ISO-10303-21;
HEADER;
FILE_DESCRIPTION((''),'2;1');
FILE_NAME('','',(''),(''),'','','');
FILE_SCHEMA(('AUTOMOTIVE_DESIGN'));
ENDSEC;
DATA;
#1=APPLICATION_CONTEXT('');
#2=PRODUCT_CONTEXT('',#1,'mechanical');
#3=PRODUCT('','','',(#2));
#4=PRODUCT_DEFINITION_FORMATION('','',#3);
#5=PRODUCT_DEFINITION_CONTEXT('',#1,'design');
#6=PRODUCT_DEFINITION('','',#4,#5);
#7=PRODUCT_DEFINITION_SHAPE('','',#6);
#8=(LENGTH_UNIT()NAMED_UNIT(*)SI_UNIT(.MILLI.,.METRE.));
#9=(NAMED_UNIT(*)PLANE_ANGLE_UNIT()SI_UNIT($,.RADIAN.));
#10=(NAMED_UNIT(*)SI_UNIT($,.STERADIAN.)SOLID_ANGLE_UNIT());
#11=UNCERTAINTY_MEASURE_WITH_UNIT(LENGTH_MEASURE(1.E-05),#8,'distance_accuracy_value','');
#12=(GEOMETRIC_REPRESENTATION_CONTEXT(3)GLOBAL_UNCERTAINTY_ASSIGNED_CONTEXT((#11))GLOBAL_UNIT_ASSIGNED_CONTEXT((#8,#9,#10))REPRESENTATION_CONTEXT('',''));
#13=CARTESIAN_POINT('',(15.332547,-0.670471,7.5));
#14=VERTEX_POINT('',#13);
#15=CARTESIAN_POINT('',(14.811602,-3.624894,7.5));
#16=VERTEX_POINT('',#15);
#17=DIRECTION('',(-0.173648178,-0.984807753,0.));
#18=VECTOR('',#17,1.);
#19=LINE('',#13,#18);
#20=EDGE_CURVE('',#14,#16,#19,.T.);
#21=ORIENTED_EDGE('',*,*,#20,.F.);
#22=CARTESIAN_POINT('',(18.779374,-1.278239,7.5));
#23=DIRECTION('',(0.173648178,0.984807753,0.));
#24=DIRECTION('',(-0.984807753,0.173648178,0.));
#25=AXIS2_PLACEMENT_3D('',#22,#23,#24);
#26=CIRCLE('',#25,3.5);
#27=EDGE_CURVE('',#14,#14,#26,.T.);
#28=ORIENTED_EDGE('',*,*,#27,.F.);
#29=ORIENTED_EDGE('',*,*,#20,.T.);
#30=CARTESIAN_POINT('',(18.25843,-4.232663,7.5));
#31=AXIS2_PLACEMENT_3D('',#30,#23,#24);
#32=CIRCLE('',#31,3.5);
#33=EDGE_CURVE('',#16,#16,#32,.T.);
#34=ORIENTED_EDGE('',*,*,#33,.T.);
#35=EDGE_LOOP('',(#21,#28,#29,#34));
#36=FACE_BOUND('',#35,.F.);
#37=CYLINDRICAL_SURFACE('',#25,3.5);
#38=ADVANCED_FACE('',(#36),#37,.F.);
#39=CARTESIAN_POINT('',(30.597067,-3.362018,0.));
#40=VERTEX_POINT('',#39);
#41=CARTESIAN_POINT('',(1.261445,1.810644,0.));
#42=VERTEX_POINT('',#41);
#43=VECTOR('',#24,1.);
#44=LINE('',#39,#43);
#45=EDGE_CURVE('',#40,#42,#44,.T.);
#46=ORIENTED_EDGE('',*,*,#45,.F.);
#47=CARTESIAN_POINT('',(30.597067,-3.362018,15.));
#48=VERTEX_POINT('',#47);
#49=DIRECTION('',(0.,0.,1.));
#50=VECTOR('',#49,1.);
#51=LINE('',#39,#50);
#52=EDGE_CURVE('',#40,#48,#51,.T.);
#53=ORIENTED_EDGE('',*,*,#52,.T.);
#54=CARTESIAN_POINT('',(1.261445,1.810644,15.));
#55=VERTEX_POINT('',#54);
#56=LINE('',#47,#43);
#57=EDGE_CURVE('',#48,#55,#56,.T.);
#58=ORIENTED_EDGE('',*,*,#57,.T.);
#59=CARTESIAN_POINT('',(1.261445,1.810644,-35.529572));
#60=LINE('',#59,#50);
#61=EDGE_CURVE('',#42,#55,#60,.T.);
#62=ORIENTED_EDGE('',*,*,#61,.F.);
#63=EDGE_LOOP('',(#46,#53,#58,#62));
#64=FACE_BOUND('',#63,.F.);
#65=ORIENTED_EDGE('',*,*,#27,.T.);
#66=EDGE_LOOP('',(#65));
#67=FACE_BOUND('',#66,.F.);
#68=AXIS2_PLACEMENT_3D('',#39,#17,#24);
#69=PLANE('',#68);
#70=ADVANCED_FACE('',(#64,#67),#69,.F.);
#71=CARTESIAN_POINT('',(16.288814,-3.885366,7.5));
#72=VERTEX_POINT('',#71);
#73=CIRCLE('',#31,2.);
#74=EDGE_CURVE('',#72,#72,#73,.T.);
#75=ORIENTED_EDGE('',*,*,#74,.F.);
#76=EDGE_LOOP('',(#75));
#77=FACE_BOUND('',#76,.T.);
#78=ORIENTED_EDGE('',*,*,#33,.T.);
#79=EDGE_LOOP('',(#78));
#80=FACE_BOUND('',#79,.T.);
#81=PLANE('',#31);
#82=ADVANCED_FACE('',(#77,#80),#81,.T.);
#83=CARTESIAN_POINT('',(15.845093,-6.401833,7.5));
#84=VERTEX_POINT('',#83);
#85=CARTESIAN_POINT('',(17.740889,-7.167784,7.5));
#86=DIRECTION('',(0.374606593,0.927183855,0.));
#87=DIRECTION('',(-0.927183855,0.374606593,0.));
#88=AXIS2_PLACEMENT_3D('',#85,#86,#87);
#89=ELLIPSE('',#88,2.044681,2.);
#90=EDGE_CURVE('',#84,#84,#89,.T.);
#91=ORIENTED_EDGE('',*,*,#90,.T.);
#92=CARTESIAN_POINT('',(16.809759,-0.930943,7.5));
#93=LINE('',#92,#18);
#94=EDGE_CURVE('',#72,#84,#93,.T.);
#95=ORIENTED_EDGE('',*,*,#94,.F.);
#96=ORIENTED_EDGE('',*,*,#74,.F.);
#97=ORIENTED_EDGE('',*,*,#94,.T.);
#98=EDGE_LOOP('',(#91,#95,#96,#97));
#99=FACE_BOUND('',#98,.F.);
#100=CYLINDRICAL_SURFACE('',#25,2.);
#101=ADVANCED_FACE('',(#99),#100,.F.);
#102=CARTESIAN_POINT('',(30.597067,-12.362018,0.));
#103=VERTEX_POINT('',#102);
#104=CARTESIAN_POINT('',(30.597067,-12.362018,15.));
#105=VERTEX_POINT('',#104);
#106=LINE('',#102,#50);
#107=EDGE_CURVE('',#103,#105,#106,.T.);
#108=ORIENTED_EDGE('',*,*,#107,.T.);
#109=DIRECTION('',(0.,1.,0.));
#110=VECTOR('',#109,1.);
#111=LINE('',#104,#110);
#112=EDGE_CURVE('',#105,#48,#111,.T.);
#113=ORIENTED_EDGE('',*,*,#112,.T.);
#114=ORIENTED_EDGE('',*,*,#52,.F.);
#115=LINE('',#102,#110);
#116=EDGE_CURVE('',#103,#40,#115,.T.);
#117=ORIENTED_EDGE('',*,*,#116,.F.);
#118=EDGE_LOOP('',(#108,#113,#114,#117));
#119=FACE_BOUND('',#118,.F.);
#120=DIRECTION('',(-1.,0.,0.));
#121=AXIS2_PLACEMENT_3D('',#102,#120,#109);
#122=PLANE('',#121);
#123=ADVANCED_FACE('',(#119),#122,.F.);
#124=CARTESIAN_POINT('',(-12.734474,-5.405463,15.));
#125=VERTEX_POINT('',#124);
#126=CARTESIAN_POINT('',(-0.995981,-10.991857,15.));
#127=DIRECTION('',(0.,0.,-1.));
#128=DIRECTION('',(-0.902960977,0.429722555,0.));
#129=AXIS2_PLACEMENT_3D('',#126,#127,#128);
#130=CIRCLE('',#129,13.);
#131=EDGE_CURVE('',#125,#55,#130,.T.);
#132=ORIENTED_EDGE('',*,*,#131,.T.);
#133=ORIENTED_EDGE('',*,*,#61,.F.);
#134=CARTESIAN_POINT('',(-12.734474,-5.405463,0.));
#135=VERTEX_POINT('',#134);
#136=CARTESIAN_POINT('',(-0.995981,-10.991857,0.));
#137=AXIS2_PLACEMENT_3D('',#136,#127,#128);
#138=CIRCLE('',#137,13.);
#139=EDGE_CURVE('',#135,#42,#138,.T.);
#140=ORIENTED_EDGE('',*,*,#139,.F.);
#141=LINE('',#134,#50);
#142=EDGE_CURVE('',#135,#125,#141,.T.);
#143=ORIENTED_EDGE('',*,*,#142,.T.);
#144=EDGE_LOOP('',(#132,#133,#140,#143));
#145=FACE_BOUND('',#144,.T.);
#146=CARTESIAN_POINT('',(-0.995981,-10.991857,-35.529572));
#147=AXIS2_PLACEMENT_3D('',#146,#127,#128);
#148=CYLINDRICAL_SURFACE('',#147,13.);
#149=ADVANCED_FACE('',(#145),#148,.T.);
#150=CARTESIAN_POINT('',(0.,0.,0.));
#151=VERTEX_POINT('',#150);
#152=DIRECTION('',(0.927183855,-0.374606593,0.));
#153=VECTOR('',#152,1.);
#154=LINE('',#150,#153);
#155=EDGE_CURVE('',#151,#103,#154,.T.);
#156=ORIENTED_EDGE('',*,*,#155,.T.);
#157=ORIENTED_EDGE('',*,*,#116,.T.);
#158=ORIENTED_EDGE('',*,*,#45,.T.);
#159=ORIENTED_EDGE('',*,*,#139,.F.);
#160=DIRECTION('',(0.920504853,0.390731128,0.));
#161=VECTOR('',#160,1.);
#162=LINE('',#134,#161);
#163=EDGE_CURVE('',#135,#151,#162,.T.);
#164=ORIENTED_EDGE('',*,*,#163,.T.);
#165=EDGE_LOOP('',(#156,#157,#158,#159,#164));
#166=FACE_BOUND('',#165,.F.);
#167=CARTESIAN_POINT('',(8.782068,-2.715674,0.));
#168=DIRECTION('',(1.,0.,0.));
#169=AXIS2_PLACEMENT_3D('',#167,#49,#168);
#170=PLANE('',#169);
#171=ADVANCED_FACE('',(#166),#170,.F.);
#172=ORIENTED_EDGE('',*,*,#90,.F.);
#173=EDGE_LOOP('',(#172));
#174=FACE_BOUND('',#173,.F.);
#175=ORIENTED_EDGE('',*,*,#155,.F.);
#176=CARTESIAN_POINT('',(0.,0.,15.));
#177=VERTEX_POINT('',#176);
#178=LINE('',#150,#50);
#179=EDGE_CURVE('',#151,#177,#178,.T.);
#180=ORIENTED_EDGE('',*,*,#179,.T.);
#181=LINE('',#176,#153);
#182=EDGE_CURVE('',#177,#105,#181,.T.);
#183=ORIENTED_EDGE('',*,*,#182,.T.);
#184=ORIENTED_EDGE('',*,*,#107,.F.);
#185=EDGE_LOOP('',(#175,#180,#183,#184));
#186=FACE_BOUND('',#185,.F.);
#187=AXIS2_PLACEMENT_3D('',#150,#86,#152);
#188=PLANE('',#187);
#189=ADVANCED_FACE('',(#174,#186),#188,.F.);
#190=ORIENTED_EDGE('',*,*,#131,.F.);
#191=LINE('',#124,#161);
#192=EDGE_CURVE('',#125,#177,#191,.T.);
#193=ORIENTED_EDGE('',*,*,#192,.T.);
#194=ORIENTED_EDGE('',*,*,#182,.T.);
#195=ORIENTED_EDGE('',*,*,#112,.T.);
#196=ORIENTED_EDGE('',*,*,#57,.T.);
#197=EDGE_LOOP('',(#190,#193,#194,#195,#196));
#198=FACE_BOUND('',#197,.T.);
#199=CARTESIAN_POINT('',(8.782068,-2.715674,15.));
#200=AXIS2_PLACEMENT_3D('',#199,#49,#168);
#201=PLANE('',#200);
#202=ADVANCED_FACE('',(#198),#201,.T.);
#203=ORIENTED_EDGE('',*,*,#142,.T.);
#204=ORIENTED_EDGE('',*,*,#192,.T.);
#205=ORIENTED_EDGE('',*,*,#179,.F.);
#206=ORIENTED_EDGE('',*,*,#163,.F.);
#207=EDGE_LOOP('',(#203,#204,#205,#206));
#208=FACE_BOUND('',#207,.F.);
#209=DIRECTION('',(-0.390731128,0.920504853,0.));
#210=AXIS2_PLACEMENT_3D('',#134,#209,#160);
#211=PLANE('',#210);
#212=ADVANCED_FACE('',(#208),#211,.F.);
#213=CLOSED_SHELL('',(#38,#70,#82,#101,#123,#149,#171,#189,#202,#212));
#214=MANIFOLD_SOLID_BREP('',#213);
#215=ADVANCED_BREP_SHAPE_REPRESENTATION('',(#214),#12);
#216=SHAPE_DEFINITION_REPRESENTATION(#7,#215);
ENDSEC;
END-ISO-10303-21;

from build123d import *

# Parameters (mm, degrees)
F1_DEPTH    = 15
F2_T1_DEPTH = 86.0591430992
F3_R        = 2
F4_DEPTH    = 16.3887129303
F5_R        = 3.5
F5_R_2      = 2
F6_DEPTH    = 3


# Not quite as in the source:
# - a fillet or chamfer that OpenCascade refuses, or shapes differently, is made with other operations: its cross-section is extruded or revolved along the edge and cut away or added


with BuildPart() as f1:
    # F0 (on Top) → F1 (new body)
    with BuildSketch(Plane.XY):
        Polygon((-12.7344739318, -5.4054634817), (0, 0), (30.5970672007, -12.3620175827), (30.5970672007, -3.3620175827), (-12.7344739318, 4.2785022346), align=None)
    extrude(amount=F1_DEPTH)

    # F2: fillet of radius 13 on 1 edges, made by hand

    # F2_s2 → F2_t1 (cut)
    with BuildSketch(Plane.XY.offset(-35.5295715496)):
        with BuildLine():
            ThreePointArc((-12.7344739318, -5.4054634817), (-6.9533889828, 0.5627654484), (1.2614450775, 1.8106440935))
            Line((1.2614450775, 1.8106440935), (-12.7344739318, 4.2785022346))
            Line((-12.7344739318, 4.2785022346), (-12.7344739318, -5.4054634817))
        make_face()
    extrude(amount=F2_T1_DEPTH, mode=Mode.SUBTRACT)

    # F3 (on face) → F4 (cut, through all)
    with BuildSketch(Plane(origin=(0.3476755995, 1.9717663066, 0), x_dir=(-0.984807753, 0.1736481777, 0), z_dir=(0.1736481777, 0.984807753, 0))):
        with Locations((-18.7160372252, 7.5)):
            Circle(F3_R)
    extrude(amount=-F4_DEPTH, mode=Mode.SUBTRACT)

    # F5 (on face) → F6 (cut)
    with BuildSketch(Plane(origin=(0.3476755995, 1.9717663066, 0), x_dir=(-0.984807753, 0.1736481777, 0), z_dir=(0.1736481777, 0.984807753, 0))):
        with Locations((-18.7160372252, 7.5)):
            Circle(F5_R)
        with Locations((-18.7160372252, 7.5)):
            Circle(F5_R_2, mode=Mode.SUBTRACT)
    extrude(amount=-F6_DEPTH, mode=Mode.SUBTRACT)


solid = f1.part
